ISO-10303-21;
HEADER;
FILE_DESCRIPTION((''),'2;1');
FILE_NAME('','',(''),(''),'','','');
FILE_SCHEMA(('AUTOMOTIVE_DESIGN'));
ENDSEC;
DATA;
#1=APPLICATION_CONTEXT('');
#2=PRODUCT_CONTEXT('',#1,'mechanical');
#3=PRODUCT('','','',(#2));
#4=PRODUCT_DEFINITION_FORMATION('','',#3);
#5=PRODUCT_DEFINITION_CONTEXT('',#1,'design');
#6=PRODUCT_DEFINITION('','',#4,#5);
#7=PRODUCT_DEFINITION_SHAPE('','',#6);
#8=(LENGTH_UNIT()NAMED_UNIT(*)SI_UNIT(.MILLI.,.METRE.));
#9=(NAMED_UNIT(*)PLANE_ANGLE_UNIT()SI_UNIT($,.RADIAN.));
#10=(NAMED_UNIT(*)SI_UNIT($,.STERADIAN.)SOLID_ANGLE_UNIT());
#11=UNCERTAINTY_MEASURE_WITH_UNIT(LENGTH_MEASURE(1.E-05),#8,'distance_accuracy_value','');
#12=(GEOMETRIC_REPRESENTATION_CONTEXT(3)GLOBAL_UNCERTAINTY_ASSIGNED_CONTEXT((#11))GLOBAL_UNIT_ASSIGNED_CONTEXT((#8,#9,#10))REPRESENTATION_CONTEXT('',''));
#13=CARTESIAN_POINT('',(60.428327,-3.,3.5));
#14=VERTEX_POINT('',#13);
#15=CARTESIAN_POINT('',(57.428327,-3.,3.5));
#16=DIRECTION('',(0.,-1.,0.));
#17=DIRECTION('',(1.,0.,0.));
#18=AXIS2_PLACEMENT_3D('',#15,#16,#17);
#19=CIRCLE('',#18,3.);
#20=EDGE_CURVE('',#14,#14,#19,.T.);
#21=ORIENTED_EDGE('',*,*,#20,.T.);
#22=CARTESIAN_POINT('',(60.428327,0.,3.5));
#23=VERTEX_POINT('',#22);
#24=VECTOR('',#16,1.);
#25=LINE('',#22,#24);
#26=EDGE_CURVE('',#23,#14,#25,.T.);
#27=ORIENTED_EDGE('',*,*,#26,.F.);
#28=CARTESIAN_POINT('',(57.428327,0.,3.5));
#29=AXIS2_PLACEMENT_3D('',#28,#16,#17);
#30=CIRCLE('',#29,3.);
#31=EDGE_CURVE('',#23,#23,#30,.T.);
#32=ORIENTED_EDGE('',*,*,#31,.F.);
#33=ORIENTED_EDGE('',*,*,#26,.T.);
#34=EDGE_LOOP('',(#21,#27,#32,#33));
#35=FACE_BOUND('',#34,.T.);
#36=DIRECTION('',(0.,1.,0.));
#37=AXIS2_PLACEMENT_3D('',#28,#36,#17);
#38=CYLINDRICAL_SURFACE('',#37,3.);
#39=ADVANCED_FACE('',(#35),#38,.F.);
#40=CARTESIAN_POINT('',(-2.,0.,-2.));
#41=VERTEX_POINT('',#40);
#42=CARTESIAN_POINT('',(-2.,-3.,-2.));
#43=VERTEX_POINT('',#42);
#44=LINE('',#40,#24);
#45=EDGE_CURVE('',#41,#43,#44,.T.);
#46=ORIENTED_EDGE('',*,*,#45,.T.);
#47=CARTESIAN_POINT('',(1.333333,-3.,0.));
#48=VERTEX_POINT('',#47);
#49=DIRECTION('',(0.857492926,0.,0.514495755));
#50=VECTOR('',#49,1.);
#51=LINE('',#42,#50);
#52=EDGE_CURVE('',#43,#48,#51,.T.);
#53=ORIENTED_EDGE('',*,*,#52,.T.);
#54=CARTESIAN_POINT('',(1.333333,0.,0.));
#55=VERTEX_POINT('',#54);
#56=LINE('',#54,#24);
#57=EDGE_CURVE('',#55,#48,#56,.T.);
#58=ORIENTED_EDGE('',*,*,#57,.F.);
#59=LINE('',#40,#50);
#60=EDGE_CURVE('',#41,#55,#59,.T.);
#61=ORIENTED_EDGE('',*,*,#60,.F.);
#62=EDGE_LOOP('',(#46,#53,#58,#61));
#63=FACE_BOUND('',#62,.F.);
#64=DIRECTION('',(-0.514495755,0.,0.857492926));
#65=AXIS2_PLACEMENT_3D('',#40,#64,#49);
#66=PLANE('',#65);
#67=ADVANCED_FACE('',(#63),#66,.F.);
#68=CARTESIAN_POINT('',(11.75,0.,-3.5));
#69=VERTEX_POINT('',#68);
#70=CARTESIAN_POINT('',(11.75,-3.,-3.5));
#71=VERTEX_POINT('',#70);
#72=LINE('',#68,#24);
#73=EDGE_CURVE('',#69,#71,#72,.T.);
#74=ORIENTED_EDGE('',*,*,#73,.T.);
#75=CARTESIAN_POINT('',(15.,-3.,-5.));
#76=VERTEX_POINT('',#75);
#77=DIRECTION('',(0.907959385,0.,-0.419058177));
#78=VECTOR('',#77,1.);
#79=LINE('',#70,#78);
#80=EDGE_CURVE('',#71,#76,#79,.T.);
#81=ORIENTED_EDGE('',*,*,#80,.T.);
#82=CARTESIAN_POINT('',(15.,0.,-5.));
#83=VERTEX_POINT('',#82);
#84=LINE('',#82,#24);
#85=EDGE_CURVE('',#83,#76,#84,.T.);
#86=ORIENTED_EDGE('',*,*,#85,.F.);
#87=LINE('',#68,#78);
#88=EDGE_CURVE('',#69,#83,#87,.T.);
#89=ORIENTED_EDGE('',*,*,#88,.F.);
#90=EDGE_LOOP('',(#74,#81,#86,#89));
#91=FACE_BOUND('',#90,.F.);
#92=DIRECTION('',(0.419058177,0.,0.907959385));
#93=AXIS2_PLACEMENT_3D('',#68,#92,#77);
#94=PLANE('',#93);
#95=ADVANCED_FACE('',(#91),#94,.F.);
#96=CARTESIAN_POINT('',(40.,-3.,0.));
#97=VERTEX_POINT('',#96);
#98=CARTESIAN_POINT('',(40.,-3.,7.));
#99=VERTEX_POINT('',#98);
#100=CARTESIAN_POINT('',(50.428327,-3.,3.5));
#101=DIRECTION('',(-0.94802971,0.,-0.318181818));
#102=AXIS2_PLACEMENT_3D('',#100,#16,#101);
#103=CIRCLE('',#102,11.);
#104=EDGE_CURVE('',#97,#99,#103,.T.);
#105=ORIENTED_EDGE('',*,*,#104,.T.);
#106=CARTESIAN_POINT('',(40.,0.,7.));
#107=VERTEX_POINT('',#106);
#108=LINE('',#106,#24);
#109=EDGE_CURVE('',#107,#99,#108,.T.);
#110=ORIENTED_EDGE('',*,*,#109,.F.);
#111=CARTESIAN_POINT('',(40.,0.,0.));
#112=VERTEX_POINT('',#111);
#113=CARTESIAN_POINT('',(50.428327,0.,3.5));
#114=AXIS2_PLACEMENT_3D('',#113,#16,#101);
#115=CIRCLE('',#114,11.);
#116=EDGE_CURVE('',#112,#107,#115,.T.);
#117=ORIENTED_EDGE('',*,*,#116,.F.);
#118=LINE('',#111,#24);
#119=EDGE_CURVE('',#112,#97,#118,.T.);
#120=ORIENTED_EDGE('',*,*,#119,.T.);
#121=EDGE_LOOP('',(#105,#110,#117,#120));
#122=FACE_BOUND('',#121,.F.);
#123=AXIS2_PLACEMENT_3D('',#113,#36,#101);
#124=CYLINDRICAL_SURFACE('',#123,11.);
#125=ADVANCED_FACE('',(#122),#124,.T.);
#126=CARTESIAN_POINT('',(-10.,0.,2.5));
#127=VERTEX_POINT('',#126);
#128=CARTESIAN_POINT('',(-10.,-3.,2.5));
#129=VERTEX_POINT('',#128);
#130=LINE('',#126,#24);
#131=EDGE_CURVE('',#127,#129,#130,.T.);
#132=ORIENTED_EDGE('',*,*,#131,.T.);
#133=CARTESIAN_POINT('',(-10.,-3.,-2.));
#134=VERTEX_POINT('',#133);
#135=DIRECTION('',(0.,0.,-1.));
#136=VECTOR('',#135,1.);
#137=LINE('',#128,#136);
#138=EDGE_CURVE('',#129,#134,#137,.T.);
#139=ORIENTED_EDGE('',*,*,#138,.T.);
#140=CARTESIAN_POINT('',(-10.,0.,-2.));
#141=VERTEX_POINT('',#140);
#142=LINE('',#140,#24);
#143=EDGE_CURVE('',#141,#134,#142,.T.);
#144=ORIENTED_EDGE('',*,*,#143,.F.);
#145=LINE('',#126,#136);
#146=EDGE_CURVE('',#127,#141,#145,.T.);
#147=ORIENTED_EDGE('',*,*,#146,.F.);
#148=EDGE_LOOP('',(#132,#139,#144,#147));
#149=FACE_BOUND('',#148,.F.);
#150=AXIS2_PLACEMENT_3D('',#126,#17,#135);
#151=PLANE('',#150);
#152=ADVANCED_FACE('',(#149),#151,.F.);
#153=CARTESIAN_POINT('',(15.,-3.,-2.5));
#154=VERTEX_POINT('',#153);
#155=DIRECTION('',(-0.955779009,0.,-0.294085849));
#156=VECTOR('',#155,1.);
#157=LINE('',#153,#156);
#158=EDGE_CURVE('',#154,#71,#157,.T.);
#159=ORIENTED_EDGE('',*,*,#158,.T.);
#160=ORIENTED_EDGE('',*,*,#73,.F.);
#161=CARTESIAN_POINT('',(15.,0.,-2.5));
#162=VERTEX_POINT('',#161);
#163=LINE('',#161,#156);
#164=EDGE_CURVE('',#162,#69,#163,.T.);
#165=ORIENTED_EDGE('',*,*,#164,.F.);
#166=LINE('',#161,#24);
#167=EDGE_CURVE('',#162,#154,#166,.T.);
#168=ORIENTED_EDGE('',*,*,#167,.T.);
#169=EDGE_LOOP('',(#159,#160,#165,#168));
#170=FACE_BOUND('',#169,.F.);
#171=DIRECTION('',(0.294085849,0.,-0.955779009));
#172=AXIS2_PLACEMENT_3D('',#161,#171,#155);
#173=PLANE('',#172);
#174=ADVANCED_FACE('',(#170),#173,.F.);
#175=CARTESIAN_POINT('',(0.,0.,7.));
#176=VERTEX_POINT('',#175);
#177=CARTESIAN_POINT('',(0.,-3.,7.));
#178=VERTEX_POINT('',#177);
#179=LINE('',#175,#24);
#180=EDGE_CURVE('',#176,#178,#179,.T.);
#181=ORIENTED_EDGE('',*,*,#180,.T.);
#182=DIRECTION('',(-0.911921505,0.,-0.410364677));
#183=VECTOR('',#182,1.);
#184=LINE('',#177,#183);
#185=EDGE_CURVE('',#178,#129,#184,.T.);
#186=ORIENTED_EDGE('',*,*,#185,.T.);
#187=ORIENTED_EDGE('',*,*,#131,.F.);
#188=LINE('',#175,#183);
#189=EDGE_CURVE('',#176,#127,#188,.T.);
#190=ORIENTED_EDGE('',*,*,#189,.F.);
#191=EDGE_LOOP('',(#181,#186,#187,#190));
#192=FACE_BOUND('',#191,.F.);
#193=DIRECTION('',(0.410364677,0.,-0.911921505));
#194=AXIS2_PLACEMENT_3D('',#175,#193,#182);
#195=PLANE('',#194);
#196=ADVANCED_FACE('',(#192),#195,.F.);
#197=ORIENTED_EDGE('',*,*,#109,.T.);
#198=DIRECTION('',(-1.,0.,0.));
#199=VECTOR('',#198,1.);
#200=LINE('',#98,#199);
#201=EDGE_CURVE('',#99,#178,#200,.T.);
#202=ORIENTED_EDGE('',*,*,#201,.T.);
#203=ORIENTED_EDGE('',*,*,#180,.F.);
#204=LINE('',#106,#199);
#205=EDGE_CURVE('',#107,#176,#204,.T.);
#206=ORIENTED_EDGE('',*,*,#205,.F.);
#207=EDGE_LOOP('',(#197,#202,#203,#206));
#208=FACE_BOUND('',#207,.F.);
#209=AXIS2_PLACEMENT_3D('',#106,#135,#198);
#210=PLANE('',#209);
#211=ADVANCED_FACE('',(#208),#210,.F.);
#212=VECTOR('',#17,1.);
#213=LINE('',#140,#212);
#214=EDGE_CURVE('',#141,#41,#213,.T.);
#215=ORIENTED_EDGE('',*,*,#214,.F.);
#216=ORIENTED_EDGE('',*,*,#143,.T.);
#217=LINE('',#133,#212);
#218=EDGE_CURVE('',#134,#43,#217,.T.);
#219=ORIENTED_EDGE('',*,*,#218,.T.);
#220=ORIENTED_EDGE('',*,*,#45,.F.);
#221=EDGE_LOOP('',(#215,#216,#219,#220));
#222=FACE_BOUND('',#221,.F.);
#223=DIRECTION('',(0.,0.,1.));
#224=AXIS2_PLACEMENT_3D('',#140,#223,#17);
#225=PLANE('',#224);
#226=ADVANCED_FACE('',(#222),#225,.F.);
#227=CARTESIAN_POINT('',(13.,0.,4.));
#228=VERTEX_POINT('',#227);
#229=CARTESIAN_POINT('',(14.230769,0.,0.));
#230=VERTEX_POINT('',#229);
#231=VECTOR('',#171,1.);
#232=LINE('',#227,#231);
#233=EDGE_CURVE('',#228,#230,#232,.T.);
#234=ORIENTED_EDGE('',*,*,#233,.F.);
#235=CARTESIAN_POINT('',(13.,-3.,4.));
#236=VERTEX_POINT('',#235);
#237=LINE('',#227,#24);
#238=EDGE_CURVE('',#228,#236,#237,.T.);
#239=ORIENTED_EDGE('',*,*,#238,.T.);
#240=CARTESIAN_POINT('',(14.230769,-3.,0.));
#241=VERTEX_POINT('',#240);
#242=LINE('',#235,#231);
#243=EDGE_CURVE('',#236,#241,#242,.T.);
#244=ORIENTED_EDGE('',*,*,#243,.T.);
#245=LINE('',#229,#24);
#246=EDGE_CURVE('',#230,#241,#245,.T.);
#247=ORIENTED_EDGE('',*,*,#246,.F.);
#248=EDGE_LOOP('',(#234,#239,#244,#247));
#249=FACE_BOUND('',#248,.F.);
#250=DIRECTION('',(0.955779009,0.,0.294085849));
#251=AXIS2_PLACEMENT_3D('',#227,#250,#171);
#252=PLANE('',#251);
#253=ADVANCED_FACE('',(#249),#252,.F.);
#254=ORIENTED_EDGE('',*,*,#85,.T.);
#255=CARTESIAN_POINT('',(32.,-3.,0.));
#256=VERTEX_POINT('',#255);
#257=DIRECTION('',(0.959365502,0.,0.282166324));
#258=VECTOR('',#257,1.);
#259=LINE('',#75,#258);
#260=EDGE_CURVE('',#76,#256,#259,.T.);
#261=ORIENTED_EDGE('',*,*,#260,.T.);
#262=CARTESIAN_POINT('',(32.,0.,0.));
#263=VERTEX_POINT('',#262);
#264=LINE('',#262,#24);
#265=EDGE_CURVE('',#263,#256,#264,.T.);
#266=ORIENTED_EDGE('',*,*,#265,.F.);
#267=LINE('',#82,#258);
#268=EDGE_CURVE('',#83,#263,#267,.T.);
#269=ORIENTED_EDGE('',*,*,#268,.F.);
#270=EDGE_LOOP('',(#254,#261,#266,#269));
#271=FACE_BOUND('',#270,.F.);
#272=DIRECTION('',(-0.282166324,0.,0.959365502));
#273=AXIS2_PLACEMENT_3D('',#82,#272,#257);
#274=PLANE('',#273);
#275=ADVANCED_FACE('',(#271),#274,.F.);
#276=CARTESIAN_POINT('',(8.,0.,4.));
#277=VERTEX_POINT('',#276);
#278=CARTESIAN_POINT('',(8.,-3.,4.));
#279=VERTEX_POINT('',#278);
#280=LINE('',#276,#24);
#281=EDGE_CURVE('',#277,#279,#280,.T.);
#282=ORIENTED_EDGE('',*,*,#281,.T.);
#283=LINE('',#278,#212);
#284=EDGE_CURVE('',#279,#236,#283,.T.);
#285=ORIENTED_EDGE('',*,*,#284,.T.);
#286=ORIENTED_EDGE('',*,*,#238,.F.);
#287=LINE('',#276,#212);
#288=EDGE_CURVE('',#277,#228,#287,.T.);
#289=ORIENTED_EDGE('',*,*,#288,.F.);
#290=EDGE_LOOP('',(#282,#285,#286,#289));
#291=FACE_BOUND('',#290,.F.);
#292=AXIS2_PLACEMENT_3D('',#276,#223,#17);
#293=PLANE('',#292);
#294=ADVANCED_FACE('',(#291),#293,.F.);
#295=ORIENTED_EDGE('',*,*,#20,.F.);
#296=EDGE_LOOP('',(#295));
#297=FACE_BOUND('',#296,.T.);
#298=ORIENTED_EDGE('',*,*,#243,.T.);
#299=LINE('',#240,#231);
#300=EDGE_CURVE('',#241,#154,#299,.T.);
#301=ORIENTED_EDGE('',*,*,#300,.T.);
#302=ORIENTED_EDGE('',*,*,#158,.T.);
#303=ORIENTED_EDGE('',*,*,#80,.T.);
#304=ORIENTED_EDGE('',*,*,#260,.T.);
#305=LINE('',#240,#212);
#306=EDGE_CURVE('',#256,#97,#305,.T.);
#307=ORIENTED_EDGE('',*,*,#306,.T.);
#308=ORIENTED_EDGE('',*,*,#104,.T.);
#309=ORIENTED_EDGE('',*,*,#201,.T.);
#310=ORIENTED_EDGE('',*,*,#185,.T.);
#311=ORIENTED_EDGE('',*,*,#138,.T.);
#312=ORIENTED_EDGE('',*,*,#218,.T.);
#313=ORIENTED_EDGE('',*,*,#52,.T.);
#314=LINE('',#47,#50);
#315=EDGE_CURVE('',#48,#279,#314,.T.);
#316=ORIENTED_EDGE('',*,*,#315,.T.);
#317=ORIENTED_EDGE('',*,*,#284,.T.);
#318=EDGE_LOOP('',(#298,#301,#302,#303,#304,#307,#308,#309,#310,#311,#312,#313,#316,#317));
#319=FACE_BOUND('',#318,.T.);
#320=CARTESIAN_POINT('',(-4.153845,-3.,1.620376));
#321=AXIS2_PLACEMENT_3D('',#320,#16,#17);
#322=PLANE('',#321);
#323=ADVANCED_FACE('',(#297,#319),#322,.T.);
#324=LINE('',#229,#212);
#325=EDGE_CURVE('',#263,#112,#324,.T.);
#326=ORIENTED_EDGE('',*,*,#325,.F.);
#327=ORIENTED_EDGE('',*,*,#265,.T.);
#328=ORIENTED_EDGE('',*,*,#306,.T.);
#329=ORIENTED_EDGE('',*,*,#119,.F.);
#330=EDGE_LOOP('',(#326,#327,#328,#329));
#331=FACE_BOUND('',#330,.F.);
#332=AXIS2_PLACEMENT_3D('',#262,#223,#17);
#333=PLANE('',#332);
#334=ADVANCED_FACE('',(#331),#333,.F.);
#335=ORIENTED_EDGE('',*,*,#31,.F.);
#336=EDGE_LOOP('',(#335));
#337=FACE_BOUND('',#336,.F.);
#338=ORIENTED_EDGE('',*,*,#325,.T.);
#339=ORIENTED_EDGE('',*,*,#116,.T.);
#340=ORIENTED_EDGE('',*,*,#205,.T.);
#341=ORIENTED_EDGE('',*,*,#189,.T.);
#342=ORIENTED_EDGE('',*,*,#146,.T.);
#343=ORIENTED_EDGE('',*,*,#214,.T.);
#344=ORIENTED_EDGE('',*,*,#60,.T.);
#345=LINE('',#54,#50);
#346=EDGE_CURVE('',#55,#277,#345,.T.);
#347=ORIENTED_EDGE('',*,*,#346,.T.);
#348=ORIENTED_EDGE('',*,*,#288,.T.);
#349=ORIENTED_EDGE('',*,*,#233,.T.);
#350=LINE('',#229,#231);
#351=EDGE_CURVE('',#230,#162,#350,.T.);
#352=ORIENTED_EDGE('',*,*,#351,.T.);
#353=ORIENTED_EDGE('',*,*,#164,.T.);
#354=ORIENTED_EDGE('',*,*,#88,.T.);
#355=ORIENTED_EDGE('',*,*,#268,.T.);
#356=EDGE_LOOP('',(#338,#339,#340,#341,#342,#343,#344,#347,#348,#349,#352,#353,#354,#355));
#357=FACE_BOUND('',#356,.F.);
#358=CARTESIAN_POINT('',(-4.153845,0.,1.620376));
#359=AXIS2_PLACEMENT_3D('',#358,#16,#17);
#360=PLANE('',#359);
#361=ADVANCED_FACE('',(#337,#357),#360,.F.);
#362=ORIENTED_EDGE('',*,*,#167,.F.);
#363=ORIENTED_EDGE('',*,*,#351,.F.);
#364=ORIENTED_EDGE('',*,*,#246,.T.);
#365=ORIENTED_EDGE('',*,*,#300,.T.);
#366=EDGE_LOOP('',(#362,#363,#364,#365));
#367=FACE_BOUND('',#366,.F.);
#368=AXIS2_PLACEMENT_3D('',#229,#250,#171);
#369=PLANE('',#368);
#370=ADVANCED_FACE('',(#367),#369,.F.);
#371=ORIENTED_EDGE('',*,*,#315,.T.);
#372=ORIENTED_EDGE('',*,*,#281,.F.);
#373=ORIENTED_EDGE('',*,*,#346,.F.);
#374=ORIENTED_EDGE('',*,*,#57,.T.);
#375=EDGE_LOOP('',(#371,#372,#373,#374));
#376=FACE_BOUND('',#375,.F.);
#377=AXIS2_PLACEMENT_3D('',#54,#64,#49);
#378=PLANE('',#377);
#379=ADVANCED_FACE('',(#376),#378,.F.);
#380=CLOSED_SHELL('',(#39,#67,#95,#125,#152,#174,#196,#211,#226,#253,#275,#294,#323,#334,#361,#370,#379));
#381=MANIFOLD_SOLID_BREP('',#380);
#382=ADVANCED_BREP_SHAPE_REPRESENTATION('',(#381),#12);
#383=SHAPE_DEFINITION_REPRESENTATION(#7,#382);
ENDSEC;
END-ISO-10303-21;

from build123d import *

# Parameters (mm, degrees)
F0_R     = 3
F1_DEPTH = 3


# Not quite as in the source:
# - a feature names something its author has since deleted; it is built from what else it names


with BuildPart() as f1:
    # F0 (on Front) → F1 (new body)
    with BuildSketch(Plane.XZ):
        Polygon((-2, -2), (1.3333333333, 0), (0, 0), (0, 7), (-10, 2.5), (-10, -2), align=None)
        Polygon((14.2307692308, 0), (32, 0), (40, 0), (40, 7), (0, 7), (0, 0), (1.3333333333, 0), (8, 4), (13, 4), align=None)
        Polygon((15, -5), (32, 0), (14.2307692308, 0), (15, -2.5), (11.75, -3.5), align=None)
        with BuildLine():
            Line((40, 7), (40, 0))
            ThreePointArc((40, 0), (61.4283268073, 3.5), (40, 7))
        make_face()
        with Locations((57.4283268073, 3.5)):
            Circle(F0_R, mode=Mode.SUBTRACT)
    extrude(amount=F1_DEPTH)


solid = f1.part
